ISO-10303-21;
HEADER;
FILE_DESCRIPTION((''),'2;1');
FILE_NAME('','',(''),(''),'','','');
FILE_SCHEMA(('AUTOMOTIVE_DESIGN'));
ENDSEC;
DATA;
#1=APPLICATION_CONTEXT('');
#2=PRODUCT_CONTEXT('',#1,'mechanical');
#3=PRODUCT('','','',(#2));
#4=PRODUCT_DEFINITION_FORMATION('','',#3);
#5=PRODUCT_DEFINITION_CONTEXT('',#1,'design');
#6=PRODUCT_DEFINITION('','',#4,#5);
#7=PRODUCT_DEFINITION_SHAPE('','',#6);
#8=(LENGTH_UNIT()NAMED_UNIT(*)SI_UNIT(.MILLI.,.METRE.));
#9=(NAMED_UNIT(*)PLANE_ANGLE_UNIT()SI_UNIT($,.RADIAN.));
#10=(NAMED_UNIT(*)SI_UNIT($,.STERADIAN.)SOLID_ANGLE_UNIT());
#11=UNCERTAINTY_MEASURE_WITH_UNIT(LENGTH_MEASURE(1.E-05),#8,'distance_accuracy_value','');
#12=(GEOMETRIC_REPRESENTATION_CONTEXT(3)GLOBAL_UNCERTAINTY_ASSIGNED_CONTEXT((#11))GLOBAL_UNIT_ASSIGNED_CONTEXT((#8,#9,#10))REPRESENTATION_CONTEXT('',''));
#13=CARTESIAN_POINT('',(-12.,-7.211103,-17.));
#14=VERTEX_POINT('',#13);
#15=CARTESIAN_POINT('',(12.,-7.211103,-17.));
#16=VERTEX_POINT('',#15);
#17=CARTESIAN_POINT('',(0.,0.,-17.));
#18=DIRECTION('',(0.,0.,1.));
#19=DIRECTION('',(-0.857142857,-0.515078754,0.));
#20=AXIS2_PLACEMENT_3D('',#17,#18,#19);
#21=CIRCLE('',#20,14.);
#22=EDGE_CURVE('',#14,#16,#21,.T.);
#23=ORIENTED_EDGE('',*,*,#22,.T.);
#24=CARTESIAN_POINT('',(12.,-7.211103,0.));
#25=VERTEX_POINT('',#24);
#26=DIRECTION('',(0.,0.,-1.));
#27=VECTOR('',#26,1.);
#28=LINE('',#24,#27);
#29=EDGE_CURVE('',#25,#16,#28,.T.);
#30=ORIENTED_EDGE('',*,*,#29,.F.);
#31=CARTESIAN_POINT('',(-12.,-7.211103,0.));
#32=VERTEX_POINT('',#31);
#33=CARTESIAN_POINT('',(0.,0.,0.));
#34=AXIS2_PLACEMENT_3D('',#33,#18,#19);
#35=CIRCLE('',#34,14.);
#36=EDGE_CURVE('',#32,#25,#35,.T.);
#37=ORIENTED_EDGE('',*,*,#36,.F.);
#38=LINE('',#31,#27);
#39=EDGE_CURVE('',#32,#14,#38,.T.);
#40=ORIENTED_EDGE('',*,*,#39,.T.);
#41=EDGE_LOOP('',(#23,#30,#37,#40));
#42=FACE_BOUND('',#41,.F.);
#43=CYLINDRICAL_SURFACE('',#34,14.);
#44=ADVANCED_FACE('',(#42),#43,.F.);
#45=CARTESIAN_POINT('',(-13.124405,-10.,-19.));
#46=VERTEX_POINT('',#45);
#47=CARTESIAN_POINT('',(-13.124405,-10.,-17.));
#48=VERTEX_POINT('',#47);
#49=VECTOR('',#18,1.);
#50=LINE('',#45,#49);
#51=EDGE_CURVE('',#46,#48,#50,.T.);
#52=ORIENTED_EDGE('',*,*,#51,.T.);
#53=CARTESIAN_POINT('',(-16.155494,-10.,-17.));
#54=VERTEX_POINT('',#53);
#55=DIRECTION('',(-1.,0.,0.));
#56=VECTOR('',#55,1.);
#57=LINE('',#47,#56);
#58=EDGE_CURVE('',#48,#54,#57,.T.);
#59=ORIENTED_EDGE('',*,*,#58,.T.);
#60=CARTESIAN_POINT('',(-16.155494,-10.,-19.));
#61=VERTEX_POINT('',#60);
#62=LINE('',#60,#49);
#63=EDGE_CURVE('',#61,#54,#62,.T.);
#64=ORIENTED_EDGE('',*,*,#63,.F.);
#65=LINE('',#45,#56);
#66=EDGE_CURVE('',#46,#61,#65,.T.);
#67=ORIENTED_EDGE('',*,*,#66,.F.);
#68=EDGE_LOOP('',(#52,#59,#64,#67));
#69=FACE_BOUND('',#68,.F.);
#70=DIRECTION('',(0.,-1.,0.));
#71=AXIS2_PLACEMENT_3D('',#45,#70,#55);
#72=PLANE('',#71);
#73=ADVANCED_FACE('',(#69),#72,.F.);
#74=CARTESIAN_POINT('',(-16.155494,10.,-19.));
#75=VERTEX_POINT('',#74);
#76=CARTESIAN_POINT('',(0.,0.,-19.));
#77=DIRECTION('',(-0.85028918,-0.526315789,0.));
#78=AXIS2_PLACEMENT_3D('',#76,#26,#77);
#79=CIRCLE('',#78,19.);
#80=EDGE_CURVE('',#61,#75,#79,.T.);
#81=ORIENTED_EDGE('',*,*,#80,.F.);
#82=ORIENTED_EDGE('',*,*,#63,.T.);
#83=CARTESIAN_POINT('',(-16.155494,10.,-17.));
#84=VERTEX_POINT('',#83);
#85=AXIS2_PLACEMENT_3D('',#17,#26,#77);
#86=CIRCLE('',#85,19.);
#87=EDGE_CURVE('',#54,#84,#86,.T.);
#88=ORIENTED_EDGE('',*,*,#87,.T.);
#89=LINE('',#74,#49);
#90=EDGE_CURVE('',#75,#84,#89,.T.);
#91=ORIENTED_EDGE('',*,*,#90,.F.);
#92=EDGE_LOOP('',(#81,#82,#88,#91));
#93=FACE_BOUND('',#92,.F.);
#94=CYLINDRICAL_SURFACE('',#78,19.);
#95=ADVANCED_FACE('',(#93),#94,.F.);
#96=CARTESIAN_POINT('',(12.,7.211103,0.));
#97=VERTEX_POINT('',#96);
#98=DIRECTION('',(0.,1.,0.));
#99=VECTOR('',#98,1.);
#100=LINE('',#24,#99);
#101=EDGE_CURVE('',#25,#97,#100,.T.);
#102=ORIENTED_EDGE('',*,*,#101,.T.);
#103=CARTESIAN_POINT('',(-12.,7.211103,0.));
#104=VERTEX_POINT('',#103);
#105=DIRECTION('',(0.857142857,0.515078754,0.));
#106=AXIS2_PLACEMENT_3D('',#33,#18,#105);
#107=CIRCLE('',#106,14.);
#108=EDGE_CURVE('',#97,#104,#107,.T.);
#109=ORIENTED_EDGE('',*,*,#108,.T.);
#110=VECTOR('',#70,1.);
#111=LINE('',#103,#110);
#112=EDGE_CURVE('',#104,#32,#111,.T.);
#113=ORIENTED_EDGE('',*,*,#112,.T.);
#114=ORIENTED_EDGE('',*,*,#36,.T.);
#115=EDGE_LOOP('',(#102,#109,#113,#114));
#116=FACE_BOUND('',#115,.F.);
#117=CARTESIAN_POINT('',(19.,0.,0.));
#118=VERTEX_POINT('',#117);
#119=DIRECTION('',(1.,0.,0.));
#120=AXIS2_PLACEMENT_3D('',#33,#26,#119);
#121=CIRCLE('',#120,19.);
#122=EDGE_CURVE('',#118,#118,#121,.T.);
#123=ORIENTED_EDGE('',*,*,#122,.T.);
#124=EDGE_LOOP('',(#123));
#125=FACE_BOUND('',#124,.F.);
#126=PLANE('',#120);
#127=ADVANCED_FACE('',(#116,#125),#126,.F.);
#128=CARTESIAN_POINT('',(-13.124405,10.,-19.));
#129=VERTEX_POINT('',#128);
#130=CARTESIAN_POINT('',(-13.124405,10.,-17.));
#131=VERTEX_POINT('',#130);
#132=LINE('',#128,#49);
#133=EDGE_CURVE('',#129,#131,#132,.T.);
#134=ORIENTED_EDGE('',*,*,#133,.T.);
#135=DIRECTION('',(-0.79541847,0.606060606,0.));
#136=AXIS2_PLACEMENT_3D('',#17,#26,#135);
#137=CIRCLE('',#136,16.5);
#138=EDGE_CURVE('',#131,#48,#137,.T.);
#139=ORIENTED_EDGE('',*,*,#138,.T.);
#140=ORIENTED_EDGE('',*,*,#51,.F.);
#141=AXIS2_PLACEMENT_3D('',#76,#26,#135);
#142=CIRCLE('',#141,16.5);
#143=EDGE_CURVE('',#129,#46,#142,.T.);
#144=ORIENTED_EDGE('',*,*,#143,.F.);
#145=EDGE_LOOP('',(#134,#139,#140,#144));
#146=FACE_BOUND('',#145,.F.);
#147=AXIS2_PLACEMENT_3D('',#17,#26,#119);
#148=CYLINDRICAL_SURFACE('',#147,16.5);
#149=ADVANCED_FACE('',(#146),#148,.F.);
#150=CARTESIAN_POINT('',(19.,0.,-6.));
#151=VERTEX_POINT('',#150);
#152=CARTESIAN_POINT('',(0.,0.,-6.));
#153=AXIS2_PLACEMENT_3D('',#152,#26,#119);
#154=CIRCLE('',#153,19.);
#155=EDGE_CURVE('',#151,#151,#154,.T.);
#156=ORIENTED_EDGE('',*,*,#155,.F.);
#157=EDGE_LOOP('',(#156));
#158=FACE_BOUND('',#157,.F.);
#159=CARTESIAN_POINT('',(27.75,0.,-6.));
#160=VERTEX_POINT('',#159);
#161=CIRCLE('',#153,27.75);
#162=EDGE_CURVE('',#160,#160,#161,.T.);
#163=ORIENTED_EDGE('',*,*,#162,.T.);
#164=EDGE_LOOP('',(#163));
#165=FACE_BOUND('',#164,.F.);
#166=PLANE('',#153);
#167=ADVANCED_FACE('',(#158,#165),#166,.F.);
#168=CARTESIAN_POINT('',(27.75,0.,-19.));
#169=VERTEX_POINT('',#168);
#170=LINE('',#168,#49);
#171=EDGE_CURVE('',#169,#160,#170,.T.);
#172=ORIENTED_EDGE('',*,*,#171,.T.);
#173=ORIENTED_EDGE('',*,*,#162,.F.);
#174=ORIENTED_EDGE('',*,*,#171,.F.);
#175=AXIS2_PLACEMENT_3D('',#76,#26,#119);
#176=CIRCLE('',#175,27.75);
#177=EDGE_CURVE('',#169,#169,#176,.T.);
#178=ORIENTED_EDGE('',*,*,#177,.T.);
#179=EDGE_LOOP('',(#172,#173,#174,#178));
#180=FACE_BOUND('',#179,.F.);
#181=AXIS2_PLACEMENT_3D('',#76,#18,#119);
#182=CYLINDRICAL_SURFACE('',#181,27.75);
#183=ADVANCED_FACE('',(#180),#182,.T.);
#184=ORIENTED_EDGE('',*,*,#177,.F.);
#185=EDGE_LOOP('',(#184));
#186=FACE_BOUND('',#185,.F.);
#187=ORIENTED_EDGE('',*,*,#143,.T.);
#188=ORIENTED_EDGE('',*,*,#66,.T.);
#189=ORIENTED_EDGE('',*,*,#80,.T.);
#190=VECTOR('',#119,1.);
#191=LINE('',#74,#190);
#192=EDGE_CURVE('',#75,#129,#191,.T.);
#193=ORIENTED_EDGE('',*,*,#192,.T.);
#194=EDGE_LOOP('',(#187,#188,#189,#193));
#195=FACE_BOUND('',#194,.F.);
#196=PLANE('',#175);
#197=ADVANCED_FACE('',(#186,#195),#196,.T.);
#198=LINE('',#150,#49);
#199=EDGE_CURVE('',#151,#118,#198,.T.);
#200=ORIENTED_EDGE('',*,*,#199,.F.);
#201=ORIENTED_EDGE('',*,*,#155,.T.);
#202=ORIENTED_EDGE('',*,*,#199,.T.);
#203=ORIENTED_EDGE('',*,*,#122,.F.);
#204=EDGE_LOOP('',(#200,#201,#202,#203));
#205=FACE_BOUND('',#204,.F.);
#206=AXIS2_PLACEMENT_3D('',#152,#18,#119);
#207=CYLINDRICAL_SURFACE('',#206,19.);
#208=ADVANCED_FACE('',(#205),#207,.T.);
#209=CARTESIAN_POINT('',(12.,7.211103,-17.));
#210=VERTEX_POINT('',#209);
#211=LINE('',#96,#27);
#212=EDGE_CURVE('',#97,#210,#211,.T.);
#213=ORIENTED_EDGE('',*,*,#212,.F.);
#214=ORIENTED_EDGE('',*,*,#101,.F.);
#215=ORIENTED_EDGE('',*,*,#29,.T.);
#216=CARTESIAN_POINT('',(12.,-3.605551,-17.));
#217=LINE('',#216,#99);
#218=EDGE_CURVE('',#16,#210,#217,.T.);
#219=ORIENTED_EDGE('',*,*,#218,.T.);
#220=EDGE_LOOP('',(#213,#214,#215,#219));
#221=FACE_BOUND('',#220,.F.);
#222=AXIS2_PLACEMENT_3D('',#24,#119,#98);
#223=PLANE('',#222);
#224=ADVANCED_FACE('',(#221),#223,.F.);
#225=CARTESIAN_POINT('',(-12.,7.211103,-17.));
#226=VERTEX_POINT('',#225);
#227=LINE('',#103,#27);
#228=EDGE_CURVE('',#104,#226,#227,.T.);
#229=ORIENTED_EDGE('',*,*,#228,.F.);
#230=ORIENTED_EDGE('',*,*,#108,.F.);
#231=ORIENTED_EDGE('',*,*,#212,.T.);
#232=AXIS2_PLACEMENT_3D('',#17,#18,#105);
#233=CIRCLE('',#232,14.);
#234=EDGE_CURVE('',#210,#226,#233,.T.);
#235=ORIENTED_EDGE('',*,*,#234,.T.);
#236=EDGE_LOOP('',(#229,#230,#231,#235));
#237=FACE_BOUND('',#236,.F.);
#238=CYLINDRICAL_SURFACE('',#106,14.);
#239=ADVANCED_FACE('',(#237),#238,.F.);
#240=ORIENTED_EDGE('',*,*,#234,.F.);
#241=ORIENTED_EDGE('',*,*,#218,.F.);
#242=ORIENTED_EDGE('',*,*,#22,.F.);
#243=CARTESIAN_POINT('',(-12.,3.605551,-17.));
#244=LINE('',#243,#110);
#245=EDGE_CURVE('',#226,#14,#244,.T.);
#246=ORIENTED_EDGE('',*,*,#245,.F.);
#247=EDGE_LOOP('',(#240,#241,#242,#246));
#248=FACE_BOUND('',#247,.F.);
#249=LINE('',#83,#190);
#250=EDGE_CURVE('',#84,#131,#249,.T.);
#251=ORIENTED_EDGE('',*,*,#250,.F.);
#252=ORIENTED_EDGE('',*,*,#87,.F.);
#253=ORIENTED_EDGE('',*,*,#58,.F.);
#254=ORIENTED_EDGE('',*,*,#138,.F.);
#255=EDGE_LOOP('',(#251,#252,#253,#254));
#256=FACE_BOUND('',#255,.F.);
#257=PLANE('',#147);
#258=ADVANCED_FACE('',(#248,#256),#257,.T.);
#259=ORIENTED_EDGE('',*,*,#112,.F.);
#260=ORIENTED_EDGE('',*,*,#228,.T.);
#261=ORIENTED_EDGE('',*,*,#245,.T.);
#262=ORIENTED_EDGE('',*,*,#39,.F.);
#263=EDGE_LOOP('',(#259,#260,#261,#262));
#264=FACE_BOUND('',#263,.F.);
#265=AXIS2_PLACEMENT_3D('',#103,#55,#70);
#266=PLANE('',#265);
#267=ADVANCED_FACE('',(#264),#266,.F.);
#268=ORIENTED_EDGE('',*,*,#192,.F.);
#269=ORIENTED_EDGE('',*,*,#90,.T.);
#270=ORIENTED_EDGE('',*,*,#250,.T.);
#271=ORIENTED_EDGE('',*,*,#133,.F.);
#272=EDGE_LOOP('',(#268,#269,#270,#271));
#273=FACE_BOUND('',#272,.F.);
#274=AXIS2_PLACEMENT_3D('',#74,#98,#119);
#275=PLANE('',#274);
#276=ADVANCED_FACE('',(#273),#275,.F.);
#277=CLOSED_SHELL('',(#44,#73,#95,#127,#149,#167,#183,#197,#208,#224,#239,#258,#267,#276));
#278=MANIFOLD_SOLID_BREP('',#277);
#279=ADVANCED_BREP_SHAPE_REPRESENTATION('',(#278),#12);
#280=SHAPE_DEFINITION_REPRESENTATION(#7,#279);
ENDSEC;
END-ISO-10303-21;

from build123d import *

# Parameters (mm, degrees)
F3_DEPTH = 25
F5_DEPTH = 2


with BuildPart() as f1:
    # F0 (on Front) → F1 (revolve)
    with BuildSketch(Plane.XZ):
        Polygon((19, 0), (0, 0), (0, -17), (16.5, -17), (16.5, -19), (27.75, -19), (27.75, -6), (19, -6), align=None)
    revolve(axis=Axis((0, 0, 0.8052456426), (0, 0, -1)))

    # F2 (on face) → F3 (cut)
    with BuildSketch(Plane.XY):
        with BuildLine():
            Line((-12, 7.2111025509), (-12, -7.2111025509))
            ThreePointArc((-12, -7.2111025509), (0, -14), (12, -7.2111025509))
            Line((12, -7.2111025509), (12, 7.2111025509))
            ThreePointArc((12, 7.2111025509), (0, 14), (-12, 7.2111025509))
        make_face()
    extrude(amount=-F3_DEPTH, mode=Mode.SUBTRACT)

    # F4 (on face) → F5 (cut, through all)
    with BuildSketch(Plane(origin=(0, 0, -19), x_dir=(1, 0, 0), z_dir=(0, 0, -1))):
        with BuildLine():
            Line((-13.1244047484, 10), (-16.1554944214, 10))
            ThreePointArc((-16.1554944214, 10), (-19, 0), (-16.1554944214, -10))
            Line((-16.1554944214, -10), (-13.1244047484, -10))
            ThreePointArc((-13.1244047484, -10), (-16.5, 0), (-13.1244047484, 10))
        make_face()
    extrude(amount=-F5_DEPTH, mode=Mode.SUBTRACT)


solid = f1.part
